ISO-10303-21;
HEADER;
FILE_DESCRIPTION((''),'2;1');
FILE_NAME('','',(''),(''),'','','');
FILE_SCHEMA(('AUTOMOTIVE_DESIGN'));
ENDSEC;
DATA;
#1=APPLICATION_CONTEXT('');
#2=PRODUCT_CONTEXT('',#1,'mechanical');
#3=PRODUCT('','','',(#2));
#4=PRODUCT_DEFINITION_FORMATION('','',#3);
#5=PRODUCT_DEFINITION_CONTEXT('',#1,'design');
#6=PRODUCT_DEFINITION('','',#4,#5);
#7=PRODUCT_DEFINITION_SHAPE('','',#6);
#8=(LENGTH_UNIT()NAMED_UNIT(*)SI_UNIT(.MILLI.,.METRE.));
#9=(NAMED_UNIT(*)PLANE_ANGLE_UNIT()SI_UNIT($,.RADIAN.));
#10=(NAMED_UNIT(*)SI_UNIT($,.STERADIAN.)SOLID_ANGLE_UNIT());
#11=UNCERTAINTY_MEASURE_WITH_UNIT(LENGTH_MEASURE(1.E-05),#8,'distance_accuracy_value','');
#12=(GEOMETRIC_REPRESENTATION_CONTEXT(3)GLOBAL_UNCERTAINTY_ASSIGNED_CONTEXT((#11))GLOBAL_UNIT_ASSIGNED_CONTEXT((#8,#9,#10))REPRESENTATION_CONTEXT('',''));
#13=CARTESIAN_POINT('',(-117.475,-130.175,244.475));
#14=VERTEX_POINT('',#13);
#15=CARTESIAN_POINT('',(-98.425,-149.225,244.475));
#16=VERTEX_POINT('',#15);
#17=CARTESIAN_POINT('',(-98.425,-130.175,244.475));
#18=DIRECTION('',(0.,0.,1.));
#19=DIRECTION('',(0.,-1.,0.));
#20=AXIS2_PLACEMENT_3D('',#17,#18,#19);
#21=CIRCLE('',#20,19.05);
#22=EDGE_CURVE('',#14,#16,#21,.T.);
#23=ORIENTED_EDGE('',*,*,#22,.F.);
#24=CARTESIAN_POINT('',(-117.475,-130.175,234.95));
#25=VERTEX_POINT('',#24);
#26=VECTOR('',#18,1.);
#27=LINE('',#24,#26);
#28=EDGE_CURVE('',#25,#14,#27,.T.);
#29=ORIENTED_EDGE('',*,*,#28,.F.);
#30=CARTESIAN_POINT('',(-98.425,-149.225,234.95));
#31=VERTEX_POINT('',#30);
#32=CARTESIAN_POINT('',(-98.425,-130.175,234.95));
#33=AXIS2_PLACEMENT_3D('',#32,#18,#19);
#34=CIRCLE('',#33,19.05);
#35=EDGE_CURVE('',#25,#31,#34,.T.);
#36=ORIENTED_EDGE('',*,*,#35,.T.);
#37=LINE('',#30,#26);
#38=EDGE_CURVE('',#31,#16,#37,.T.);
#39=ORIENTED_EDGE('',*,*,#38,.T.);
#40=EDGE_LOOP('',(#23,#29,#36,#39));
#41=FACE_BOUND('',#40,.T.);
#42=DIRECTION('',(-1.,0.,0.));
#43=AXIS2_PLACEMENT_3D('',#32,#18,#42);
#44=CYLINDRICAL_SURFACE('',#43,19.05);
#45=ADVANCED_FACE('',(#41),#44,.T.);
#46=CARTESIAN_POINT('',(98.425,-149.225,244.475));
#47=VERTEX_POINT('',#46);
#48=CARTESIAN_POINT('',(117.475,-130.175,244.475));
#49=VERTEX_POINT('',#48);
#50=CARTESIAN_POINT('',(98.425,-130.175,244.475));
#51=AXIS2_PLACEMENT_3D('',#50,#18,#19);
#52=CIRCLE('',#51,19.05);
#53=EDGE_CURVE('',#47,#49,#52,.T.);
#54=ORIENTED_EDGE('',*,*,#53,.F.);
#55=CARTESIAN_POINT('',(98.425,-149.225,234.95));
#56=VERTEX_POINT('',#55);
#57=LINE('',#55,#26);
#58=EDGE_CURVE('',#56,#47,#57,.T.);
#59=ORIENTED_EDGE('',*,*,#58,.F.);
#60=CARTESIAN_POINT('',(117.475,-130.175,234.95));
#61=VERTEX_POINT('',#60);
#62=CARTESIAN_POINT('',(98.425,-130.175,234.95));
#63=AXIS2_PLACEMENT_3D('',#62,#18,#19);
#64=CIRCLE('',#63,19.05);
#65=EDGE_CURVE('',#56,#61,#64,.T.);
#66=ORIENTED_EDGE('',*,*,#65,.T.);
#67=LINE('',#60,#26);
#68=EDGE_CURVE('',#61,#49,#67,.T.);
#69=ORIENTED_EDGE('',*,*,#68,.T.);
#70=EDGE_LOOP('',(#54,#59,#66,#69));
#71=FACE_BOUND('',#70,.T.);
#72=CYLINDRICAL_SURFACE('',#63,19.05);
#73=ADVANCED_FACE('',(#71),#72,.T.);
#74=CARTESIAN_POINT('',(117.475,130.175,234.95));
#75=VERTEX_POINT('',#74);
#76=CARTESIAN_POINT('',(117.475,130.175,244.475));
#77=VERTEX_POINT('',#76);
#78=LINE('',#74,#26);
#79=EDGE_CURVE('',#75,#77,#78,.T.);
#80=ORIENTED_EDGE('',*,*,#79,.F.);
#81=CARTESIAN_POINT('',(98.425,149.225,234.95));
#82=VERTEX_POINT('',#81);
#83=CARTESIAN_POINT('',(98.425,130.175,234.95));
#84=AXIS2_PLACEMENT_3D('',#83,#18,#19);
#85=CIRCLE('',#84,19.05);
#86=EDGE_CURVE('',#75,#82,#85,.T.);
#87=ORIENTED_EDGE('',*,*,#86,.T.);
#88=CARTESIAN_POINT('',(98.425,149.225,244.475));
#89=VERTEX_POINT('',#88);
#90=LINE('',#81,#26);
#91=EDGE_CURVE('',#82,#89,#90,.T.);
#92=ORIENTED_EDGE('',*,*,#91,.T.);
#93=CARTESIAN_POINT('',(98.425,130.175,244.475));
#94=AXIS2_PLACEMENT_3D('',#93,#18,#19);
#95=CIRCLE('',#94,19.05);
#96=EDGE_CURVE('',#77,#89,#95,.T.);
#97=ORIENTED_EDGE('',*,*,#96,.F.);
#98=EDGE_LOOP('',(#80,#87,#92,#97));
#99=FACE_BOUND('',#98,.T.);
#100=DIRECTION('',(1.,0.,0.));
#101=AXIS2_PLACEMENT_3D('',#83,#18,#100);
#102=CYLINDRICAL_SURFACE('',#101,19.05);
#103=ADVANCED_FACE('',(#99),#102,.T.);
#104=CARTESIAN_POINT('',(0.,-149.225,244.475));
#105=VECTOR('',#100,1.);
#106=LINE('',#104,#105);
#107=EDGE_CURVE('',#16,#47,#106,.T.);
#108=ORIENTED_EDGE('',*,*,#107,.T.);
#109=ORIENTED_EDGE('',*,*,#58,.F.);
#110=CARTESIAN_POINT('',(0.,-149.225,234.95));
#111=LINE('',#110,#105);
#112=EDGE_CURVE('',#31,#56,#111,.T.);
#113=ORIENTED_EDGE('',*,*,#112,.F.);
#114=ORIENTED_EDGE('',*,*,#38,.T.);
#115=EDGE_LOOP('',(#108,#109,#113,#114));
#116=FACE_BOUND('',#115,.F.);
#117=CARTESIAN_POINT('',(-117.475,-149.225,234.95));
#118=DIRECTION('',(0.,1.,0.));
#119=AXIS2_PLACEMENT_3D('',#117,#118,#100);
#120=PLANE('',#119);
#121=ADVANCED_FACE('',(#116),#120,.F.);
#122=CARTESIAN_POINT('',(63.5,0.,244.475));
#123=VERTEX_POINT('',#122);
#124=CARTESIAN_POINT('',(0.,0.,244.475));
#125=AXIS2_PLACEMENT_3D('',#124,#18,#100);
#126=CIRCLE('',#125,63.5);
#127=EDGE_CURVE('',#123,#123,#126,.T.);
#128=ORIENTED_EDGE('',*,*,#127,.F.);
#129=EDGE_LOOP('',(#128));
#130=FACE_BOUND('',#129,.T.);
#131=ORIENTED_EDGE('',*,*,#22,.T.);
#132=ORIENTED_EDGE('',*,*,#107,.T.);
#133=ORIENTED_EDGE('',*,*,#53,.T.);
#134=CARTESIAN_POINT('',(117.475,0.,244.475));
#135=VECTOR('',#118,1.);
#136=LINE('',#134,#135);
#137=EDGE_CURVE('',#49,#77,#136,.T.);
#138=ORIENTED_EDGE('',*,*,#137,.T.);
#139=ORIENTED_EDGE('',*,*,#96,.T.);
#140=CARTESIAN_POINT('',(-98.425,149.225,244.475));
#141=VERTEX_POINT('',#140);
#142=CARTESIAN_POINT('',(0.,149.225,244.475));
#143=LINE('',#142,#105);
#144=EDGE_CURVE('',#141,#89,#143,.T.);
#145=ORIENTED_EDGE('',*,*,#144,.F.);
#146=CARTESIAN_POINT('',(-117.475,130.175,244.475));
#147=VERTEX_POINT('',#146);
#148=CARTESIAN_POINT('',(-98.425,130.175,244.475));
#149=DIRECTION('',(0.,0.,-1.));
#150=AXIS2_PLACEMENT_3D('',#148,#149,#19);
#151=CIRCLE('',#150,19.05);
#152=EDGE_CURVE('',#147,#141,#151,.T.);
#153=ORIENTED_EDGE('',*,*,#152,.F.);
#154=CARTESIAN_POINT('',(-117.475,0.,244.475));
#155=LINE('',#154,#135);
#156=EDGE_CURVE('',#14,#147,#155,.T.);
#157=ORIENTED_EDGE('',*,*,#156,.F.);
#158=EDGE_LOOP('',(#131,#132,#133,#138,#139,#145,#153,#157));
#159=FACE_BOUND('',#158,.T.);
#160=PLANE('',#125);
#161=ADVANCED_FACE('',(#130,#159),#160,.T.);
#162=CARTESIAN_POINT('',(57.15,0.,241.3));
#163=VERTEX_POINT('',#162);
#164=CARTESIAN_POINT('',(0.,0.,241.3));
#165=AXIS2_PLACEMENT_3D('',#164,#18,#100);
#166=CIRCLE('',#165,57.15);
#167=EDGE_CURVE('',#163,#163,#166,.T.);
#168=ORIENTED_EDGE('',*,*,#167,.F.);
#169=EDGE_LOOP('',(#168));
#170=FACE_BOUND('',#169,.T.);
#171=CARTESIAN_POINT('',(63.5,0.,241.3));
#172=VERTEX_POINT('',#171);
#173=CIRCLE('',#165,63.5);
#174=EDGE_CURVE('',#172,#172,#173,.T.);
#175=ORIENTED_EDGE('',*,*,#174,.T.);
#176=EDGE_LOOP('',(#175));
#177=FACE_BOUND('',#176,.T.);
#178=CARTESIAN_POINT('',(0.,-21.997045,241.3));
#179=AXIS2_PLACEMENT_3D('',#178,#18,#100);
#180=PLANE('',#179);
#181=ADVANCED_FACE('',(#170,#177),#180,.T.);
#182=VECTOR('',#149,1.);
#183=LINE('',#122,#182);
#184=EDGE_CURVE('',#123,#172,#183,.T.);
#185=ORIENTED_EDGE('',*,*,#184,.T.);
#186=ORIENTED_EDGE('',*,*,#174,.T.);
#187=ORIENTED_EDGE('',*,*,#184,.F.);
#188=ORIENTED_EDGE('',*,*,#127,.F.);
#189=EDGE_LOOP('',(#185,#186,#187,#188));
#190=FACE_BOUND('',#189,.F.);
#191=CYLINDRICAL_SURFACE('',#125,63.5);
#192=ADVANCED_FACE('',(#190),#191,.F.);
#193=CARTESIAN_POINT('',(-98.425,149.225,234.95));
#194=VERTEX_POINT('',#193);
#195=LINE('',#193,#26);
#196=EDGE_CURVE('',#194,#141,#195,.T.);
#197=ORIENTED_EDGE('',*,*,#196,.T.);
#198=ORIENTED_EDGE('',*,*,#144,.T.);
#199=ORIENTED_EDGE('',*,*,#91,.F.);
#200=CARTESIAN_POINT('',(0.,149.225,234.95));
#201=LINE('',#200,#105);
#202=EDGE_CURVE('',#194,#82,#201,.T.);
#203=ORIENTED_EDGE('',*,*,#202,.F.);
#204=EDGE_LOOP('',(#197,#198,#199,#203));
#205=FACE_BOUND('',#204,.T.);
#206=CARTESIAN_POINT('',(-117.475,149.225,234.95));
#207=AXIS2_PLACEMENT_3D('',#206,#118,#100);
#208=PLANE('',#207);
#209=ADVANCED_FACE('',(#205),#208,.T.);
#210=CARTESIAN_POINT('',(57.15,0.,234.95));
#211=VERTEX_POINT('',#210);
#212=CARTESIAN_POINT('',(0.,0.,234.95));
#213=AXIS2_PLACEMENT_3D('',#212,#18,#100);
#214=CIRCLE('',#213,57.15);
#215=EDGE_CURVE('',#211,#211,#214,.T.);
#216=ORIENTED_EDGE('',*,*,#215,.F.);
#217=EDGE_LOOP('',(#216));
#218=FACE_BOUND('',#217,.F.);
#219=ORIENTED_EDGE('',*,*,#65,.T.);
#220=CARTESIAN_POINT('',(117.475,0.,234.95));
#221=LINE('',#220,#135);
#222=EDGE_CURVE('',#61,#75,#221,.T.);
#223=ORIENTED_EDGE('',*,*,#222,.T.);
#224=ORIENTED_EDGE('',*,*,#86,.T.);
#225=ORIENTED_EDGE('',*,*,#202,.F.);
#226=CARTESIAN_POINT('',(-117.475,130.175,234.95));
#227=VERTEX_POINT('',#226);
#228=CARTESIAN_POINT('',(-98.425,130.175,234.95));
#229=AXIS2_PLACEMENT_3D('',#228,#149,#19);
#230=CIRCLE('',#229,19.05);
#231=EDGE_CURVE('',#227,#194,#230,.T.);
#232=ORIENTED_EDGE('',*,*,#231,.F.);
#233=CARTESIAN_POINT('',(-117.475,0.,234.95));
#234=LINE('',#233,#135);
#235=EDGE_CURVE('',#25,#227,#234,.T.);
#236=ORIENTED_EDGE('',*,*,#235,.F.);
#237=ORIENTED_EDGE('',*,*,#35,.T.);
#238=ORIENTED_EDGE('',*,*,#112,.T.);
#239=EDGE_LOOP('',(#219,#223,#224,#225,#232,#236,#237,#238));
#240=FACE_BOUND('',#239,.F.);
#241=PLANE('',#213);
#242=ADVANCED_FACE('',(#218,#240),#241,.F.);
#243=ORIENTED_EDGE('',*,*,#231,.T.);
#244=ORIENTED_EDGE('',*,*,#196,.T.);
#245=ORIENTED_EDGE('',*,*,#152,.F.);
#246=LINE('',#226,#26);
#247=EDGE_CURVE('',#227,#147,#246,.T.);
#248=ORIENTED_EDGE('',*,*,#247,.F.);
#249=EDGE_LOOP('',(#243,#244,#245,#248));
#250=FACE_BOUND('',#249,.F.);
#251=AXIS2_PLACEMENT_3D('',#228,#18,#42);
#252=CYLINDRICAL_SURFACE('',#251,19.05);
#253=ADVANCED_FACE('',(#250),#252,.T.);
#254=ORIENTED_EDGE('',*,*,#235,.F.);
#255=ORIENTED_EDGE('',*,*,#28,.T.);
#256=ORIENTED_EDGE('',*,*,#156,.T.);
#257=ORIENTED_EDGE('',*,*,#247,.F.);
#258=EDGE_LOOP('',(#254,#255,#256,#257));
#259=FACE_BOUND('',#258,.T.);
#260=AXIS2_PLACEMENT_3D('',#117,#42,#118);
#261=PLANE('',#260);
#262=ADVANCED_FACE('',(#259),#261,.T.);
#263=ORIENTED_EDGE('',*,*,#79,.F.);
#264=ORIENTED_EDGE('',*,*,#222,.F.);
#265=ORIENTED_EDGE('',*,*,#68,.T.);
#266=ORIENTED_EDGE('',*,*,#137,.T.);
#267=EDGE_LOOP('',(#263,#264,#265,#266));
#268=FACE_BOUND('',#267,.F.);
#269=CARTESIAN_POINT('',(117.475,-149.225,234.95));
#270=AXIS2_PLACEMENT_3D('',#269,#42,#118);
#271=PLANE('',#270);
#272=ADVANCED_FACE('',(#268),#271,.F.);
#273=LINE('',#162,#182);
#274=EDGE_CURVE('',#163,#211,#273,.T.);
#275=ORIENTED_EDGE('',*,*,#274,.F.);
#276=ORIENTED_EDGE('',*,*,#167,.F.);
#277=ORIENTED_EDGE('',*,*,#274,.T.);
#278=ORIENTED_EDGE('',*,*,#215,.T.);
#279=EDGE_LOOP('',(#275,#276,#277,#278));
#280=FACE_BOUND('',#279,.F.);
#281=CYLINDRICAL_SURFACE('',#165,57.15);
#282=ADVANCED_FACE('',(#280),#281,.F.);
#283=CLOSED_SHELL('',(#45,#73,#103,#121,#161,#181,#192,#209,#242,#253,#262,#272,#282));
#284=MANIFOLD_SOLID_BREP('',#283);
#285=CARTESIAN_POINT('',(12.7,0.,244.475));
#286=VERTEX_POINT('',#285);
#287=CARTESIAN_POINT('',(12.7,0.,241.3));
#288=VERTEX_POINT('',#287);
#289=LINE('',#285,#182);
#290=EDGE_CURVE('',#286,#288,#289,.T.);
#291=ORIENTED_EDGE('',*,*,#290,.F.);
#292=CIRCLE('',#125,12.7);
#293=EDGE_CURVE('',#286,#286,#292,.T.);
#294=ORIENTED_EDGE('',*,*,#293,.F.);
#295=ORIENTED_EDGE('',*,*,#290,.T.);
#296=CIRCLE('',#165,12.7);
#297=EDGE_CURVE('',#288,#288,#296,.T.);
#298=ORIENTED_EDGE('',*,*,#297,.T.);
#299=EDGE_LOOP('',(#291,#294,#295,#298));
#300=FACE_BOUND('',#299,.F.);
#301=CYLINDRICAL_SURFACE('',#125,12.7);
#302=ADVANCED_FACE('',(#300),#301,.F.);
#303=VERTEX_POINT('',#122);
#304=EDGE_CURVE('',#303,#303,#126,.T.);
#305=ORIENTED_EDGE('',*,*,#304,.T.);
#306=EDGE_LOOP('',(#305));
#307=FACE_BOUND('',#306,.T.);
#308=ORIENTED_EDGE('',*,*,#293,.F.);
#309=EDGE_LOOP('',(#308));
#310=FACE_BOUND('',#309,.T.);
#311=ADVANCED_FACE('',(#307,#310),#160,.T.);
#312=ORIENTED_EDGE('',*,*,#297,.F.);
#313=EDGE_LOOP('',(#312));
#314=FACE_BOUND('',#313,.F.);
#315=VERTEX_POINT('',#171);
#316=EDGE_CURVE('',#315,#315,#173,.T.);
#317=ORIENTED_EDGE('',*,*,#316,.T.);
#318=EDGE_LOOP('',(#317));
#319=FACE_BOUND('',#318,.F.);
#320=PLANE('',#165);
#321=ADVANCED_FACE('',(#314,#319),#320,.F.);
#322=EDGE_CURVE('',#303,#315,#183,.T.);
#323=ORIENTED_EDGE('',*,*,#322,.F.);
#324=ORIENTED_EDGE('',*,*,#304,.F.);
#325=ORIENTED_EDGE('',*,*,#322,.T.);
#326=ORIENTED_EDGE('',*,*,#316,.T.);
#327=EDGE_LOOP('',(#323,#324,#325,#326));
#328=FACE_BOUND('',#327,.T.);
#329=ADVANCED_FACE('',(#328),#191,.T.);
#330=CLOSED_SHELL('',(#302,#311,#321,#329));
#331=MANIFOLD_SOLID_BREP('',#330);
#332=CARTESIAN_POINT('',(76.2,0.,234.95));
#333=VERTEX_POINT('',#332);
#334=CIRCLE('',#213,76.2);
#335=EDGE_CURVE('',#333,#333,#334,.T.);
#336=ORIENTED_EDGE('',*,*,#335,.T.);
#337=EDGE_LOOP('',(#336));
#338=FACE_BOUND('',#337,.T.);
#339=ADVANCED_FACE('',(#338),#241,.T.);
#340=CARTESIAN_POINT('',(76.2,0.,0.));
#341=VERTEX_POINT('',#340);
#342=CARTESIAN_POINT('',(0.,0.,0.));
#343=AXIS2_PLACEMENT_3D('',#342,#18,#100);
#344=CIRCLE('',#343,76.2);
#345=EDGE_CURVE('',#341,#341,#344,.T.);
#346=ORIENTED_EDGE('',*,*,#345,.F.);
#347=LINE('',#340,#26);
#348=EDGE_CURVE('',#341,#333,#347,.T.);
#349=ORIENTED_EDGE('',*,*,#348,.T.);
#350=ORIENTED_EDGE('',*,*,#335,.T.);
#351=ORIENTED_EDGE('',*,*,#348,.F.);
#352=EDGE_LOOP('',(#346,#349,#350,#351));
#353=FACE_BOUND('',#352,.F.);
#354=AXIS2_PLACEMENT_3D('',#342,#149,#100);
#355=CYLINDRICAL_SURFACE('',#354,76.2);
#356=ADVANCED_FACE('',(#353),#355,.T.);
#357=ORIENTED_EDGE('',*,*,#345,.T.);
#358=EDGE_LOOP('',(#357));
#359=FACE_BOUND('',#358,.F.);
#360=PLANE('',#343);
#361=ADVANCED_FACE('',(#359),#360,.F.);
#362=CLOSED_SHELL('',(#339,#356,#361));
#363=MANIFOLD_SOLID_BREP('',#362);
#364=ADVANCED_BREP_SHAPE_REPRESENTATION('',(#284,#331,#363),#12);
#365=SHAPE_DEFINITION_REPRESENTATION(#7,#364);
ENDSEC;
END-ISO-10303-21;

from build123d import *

# Parameters (mm, degrees)
F0_R      = 76.2
F1_DEPTH  = 234.95
F2_W      = 234.95
F2_H      = 298.45
F2_R      = 76.2
F3_DEPTH  = 9.525
F4_R      = 19.05
F6_DEPTH  = 3.175
F7_R      = 57.15
F8_DEPTH  = 241.301
F9_R      = 63.5
F9_R_2    = 12.7
F10_DEPTH = 3.175


# Not quite as in the source:
# - a length typed as a fraction of an inch, garbled in the dataset ("3 / 203.2 mm" for 3/8 in), is restored


with BuildPart() as f1:
    # F0 (on Top) → F1 (new body)
    with BuildSketch(Plane.XY):
        Circle(F0_R)
    extrude(amount=F1_DEPTH)


with BuildPart() as f3:
    # F2 (on face) → F3 (new body)
    with BuildSketch(Plane.XY.offset(234.95)):
        Rectangle(F2_W, F2_H)
        Circle(F2_R, mode=Mode.SUBTRACT)
        Circle(F2_R)
    extrude(amount=F3_DEPTH)

    # F4
    f4_edges = [f3.edges().sort_by_distance(p)[0] for p in [
        (117.475, -149.225, 239.7125),
        (-117.475, -149.225, 239.7125),
        (117.475, 149.225, 239.7125),
        (-117.475, 149.225, 239.7125),
    ]]
    fillet(f4_edges, radius=F4_R)

    # F5 (on face) → F6 (cut)
    with BuildSketch(Plane.XY.offset(244.475)):
        with BuildLine():
            ThreePointArc((-63.5, 0), (0, -63.5), (63.5, 0))
            Line((63.5, 0), (-63.5, 0))
        make_face()
        with BuildLine():
            Line((-63.5, 0), (63.5, 0))
            ThreePointArc((63.5, 0), (0, 63.5), (-63.5, 0))
        make_face()
    extrude(amount=-F6_DEPTH, mode=Mode.SUBTRACT)

    # F7 (on face) → F8 (cut, through all)
    with BuildSketch(Plane.XY.offset(241.3)):
        Circle(F7_R)
    extrude(amount=-F8_DEPTH, mode=Mode.SUBTRACT)


with BuildPart() as f10:
    # F9 (on face) → F10 (new body, through all)
    with BuildSketch(Plane.XY.offset(244.475)):
        Circle(F9_R)
        Circle(F9_R_2, mode=Mode.SUBTRACT)
    extrude(amount=-F10_DEPTH)


solid = Compound([f1.part, f3.part, f10.part])
